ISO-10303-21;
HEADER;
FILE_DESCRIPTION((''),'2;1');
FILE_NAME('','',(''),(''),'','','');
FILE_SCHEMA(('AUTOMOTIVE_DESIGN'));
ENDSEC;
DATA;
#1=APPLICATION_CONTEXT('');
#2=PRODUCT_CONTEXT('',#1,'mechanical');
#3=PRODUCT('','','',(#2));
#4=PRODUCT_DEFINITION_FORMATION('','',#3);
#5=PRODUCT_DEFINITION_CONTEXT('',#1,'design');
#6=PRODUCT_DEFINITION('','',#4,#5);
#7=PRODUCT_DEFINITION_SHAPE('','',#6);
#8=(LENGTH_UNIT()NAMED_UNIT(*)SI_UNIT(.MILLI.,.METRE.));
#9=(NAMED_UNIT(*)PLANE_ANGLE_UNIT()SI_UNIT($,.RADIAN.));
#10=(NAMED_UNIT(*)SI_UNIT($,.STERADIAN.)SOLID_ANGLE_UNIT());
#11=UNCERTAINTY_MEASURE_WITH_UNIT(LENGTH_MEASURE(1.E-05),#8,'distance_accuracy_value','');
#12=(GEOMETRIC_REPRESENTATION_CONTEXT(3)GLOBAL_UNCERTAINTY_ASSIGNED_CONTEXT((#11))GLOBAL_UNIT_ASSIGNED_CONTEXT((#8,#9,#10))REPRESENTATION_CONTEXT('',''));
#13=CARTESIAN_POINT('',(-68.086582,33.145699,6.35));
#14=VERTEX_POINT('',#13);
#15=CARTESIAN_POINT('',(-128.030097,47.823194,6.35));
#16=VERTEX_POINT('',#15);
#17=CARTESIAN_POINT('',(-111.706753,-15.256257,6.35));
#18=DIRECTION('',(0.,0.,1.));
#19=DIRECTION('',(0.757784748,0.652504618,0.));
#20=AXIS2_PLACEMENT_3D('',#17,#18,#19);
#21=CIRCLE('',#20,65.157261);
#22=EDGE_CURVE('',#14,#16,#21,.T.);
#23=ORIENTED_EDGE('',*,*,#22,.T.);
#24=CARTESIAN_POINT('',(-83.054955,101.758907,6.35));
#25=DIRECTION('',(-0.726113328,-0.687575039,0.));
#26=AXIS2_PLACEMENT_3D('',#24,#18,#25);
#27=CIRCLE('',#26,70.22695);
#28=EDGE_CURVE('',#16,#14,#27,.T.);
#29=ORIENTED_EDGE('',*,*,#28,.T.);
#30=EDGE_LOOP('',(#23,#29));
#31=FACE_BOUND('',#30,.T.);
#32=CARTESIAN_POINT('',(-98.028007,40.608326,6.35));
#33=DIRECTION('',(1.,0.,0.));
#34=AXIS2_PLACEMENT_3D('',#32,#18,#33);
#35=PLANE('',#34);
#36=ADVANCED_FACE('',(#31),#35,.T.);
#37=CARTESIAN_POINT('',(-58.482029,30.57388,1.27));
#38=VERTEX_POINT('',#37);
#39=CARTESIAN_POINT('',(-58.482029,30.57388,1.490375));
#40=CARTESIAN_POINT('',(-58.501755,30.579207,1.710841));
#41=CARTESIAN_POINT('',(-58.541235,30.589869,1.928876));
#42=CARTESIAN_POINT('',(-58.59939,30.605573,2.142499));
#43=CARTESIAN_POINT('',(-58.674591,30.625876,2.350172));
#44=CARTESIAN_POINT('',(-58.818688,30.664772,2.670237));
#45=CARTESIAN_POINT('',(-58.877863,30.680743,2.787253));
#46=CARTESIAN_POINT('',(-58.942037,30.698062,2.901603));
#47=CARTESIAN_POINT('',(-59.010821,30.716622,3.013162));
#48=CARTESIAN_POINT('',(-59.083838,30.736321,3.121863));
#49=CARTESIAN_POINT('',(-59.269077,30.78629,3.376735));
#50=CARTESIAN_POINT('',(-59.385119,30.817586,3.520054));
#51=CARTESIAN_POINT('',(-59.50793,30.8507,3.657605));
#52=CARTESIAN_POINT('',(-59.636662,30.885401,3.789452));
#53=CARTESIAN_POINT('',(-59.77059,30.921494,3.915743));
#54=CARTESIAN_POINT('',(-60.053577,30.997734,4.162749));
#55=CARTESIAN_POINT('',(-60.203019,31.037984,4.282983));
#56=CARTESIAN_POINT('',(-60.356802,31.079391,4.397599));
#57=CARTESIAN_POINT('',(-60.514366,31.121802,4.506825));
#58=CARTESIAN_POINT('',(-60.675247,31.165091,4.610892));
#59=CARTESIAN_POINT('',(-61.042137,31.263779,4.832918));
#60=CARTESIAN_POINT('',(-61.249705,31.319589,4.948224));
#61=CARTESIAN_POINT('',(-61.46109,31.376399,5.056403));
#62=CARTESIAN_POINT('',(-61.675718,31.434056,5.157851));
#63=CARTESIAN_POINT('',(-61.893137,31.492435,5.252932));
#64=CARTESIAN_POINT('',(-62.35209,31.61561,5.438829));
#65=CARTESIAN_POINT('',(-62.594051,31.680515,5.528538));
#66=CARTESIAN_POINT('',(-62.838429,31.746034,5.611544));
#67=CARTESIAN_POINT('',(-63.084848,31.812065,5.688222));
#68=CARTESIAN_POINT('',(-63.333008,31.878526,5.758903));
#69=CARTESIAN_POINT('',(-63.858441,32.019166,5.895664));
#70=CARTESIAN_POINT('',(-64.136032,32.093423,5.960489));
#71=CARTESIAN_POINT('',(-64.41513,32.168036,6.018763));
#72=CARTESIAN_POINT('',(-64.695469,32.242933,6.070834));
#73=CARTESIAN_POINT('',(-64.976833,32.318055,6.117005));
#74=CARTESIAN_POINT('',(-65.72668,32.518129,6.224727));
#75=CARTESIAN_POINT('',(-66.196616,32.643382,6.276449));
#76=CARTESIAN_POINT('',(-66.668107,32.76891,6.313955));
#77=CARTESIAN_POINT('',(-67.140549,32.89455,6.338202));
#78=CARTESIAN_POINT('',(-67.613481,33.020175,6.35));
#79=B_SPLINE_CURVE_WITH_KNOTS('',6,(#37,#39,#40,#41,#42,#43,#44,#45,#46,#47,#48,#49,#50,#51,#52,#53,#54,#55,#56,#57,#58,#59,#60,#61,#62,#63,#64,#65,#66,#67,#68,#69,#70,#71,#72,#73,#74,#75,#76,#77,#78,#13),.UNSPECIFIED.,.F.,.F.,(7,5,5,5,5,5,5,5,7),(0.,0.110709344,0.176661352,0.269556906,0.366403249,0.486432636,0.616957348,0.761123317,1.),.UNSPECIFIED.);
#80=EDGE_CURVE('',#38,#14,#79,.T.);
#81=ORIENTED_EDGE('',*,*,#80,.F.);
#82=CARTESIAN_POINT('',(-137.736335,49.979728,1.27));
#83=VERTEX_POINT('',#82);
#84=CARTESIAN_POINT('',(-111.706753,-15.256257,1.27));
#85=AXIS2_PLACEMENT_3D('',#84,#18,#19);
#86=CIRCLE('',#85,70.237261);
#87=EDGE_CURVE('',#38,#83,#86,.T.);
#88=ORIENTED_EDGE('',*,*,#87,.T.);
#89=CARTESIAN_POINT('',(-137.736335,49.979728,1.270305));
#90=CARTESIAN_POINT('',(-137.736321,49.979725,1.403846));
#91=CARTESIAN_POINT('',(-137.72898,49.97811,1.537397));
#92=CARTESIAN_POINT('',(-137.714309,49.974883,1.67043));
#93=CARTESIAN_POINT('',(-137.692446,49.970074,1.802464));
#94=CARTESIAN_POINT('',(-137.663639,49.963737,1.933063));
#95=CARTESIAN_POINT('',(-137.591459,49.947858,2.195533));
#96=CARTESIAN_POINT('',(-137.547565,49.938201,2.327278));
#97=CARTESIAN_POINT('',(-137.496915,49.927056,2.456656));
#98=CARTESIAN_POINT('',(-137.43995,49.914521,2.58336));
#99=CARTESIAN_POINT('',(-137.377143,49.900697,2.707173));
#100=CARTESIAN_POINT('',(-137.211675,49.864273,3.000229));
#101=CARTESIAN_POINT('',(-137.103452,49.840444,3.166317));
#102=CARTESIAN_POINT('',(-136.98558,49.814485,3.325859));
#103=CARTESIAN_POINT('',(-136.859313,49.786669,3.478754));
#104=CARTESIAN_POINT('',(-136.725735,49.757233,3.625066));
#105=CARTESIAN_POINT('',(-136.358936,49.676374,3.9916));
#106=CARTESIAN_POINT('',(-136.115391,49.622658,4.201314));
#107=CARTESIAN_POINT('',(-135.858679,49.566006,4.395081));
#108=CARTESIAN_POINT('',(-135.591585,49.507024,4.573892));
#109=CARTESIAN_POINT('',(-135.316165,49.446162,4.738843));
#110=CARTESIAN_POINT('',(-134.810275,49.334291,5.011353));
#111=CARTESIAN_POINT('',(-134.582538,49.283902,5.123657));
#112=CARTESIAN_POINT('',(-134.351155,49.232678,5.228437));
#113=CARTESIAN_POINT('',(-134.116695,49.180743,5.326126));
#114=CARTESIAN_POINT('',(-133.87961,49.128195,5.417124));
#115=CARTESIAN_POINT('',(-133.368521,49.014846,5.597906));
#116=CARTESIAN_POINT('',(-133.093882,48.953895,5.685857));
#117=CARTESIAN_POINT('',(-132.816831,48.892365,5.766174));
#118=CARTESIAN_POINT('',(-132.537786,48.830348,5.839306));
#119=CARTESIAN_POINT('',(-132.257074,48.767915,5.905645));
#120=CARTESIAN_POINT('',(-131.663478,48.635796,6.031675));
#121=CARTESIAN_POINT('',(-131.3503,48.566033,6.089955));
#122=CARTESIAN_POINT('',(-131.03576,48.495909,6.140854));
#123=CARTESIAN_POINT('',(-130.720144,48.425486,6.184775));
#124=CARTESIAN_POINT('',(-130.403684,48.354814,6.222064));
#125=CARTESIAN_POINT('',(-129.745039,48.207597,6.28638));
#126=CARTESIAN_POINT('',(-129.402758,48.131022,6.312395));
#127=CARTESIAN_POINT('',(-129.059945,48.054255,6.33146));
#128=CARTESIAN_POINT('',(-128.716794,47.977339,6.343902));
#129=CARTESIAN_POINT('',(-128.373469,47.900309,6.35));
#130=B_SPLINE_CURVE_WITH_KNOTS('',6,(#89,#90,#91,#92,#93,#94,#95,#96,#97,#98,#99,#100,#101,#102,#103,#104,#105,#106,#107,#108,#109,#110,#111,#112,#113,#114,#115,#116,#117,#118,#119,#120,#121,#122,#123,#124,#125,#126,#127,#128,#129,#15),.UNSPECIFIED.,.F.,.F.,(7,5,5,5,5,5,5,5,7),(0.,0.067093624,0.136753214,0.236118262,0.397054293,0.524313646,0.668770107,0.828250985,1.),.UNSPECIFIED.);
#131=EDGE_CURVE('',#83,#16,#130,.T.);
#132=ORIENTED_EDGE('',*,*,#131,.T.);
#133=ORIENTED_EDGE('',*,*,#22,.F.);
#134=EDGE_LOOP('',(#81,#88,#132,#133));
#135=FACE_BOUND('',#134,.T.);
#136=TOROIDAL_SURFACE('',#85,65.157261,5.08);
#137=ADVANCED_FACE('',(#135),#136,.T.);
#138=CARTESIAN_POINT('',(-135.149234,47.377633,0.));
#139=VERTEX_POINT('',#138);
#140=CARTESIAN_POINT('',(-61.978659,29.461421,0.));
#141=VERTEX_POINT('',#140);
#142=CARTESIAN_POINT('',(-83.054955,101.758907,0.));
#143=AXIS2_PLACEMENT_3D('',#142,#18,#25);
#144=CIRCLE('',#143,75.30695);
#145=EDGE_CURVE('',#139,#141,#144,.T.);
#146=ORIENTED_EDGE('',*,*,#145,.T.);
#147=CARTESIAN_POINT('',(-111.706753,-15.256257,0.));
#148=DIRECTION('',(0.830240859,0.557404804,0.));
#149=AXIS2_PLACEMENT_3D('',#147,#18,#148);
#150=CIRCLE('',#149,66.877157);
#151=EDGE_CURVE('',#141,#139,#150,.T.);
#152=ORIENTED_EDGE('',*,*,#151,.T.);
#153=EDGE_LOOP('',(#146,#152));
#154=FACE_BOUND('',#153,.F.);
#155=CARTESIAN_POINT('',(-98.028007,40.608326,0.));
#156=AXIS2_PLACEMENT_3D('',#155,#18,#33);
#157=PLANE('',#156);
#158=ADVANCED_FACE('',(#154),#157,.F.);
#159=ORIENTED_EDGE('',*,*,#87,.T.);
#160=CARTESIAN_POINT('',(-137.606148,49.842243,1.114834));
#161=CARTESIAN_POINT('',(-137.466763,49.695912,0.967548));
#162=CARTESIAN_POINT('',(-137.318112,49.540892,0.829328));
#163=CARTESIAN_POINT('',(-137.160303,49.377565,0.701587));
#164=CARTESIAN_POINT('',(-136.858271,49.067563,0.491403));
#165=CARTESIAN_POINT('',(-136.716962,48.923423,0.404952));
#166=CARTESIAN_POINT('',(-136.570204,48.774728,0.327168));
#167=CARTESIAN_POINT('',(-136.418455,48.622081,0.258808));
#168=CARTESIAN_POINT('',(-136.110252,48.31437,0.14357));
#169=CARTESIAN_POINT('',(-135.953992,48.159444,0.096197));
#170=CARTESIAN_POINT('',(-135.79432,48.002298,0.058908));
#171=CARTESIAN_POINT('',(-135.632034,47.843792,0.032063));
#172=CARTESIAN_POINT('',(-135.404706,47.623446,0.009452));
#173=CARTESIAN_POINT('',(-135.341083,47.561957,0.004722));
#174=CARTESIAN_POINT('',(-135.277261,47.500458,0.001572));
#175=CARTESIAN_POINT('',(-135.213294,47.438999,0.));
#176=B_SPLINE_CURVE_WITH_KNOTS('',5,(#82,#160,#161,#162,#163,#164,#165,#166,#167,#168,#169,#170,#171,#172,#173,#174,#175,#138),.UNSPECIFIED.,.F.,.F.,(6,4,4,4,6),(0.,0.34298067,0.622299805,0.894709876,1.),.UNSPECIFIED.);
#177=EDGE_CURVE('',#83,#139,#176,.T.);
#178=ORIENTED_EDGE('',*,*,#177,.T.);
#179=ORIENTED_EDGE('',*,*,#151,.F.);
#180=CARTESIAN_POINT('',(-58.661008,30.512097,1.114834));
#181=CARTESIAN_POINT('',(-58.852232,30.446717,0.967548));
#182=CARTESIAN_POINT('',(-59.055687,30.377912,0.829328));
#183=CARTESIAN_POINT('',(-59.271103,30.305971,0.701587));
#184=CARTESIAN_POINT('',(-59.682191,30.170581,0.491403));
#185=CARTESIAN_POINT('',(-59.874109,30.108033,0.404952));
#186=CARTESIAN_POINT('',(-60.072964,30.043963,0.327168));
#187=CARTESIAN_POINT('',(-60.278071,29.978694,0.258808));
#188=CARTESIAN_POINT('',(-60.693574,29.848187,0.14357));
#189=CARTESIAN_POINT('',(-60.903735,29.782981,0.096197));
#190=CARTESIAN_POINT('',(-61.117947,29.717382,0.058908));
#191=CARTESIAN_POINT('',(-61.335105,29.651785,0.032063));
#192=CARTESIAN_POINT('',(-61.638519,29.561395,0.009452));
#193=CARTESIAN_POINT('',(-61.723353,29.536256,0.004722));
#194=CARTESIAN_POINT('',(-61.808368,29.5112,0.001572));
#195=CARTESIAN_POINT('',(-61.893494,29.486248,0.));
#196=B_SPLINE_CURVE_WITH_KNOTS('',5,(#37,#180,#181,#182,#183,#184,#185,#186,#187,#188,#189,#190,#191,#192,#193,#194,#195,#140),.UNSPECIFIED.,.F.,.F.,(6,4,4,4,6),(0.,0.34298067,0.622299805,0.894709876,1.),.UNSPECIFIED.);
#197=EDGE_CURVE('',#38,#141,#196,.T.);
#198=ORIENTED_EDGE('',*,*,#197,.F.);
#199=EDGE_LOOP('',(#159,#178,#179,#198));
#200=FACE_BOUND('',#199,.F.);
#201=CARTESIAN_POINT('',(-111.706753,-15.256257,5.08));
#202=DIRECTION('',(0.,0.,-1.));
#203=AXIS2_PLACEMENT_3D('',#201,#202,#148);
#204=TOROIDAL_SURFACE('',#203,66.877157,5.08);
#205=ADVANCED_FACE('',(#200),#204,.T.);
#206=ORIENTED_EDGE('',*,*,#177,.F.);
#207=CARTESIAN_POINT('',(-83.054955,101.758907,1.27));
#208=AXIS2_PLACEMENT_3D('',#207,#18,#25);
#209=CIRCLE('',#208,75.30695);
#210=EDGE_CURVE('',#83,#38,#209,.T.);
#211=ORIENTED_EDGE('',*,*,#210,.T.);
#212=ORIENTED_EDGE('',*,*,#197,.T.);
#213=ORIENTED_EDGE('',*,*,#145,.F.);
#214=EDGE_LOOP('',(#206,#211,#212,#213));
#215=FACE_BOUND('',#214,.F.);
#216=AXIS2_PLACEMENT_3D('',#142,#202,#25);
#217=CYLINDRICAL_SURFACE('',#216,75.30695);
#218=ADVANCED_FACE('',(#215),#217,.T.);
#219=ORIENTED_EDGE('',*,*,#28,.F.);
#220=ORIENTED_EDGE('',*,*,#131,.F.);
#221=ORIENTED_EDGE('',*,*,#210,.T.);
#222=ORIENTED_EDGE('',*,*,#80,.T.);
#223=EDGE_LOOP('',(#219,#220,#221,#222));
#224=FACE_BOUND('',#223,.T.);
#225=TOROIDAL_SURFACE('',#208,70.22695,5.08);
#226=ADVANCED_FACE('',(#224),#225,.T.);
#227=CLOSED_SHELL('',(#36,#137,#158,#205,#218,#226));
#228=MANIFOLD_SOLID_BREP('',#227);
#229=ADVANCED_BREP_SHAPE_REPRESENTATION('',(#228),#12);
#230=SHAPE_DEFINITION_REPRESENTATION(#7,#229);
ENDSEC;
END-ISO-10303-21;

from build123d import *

# Parameters (mm, degrees)
F1_DEPTH    = 6.35
F2_R        = 5.08
F3_T2_ANGLE = 84.7300035824


# Not quite as in the source:
# - a fillet or chamfer that OpenCascade refuses, or shapes differently, is made with other operations: its cross-section is extruded or revolved along the edge and cut away or added


with BuildPart() as f1:
    # F0 (on Top) → F1 (new body)
    with BuildSketch(Plane.XY):
        with BuildLine():
            ThreePointArc((-58.4820285439, 30.5738802999), (-95.0022427224, 52.9656761429), (-137.7363353968, 49.9797277153))
            ThreePointArc((-137.7363353968, 49.9797277153), (-100.9651889281, 28.6127500264), (-58.4820285439, 30.5738802999))
        make_face()
    extrude(amount=F1_DEPTH)

    # F2
    f2_edges = [f1.edges().sort_by_distance(p)[0] for p in [
        (-100.965189, 28.61275, 6.35),
        (-95.002243, 52.965676, 6.35),
    ]]
    fillet(f2_edges, radius=F2_R)

    # F3: fillet of radius 5.08 on 2 edges, made by hand

    # F3_s1 → F3_t2 (revolve, cut)
    with BuildSketch(Plane(origin=(-27.6470070166, 41.1795425882, 0), x_dir=(0, 0, 1), z_dir=(0.557404804, -0.8302408593, 0))):
        with BuildLine():
            ThreePointArc((1.27, 31.0101609977), (0.3280951188, 32.5742139386), (0, 34.3702651628))
            Line((0, 34.3702651628), (0, 31.0101609977))
            Line((0, 31.0101609977), (1.27, 31.0101609977))
        make_face()
    revolve(axis=Axis((-111.7067534455, -15.2562566767, 0), (0, 0, 1)), revolution_arc=F3_T2_ANGLE, mode=Mode.SUBTRACT)


solid = f1.part
